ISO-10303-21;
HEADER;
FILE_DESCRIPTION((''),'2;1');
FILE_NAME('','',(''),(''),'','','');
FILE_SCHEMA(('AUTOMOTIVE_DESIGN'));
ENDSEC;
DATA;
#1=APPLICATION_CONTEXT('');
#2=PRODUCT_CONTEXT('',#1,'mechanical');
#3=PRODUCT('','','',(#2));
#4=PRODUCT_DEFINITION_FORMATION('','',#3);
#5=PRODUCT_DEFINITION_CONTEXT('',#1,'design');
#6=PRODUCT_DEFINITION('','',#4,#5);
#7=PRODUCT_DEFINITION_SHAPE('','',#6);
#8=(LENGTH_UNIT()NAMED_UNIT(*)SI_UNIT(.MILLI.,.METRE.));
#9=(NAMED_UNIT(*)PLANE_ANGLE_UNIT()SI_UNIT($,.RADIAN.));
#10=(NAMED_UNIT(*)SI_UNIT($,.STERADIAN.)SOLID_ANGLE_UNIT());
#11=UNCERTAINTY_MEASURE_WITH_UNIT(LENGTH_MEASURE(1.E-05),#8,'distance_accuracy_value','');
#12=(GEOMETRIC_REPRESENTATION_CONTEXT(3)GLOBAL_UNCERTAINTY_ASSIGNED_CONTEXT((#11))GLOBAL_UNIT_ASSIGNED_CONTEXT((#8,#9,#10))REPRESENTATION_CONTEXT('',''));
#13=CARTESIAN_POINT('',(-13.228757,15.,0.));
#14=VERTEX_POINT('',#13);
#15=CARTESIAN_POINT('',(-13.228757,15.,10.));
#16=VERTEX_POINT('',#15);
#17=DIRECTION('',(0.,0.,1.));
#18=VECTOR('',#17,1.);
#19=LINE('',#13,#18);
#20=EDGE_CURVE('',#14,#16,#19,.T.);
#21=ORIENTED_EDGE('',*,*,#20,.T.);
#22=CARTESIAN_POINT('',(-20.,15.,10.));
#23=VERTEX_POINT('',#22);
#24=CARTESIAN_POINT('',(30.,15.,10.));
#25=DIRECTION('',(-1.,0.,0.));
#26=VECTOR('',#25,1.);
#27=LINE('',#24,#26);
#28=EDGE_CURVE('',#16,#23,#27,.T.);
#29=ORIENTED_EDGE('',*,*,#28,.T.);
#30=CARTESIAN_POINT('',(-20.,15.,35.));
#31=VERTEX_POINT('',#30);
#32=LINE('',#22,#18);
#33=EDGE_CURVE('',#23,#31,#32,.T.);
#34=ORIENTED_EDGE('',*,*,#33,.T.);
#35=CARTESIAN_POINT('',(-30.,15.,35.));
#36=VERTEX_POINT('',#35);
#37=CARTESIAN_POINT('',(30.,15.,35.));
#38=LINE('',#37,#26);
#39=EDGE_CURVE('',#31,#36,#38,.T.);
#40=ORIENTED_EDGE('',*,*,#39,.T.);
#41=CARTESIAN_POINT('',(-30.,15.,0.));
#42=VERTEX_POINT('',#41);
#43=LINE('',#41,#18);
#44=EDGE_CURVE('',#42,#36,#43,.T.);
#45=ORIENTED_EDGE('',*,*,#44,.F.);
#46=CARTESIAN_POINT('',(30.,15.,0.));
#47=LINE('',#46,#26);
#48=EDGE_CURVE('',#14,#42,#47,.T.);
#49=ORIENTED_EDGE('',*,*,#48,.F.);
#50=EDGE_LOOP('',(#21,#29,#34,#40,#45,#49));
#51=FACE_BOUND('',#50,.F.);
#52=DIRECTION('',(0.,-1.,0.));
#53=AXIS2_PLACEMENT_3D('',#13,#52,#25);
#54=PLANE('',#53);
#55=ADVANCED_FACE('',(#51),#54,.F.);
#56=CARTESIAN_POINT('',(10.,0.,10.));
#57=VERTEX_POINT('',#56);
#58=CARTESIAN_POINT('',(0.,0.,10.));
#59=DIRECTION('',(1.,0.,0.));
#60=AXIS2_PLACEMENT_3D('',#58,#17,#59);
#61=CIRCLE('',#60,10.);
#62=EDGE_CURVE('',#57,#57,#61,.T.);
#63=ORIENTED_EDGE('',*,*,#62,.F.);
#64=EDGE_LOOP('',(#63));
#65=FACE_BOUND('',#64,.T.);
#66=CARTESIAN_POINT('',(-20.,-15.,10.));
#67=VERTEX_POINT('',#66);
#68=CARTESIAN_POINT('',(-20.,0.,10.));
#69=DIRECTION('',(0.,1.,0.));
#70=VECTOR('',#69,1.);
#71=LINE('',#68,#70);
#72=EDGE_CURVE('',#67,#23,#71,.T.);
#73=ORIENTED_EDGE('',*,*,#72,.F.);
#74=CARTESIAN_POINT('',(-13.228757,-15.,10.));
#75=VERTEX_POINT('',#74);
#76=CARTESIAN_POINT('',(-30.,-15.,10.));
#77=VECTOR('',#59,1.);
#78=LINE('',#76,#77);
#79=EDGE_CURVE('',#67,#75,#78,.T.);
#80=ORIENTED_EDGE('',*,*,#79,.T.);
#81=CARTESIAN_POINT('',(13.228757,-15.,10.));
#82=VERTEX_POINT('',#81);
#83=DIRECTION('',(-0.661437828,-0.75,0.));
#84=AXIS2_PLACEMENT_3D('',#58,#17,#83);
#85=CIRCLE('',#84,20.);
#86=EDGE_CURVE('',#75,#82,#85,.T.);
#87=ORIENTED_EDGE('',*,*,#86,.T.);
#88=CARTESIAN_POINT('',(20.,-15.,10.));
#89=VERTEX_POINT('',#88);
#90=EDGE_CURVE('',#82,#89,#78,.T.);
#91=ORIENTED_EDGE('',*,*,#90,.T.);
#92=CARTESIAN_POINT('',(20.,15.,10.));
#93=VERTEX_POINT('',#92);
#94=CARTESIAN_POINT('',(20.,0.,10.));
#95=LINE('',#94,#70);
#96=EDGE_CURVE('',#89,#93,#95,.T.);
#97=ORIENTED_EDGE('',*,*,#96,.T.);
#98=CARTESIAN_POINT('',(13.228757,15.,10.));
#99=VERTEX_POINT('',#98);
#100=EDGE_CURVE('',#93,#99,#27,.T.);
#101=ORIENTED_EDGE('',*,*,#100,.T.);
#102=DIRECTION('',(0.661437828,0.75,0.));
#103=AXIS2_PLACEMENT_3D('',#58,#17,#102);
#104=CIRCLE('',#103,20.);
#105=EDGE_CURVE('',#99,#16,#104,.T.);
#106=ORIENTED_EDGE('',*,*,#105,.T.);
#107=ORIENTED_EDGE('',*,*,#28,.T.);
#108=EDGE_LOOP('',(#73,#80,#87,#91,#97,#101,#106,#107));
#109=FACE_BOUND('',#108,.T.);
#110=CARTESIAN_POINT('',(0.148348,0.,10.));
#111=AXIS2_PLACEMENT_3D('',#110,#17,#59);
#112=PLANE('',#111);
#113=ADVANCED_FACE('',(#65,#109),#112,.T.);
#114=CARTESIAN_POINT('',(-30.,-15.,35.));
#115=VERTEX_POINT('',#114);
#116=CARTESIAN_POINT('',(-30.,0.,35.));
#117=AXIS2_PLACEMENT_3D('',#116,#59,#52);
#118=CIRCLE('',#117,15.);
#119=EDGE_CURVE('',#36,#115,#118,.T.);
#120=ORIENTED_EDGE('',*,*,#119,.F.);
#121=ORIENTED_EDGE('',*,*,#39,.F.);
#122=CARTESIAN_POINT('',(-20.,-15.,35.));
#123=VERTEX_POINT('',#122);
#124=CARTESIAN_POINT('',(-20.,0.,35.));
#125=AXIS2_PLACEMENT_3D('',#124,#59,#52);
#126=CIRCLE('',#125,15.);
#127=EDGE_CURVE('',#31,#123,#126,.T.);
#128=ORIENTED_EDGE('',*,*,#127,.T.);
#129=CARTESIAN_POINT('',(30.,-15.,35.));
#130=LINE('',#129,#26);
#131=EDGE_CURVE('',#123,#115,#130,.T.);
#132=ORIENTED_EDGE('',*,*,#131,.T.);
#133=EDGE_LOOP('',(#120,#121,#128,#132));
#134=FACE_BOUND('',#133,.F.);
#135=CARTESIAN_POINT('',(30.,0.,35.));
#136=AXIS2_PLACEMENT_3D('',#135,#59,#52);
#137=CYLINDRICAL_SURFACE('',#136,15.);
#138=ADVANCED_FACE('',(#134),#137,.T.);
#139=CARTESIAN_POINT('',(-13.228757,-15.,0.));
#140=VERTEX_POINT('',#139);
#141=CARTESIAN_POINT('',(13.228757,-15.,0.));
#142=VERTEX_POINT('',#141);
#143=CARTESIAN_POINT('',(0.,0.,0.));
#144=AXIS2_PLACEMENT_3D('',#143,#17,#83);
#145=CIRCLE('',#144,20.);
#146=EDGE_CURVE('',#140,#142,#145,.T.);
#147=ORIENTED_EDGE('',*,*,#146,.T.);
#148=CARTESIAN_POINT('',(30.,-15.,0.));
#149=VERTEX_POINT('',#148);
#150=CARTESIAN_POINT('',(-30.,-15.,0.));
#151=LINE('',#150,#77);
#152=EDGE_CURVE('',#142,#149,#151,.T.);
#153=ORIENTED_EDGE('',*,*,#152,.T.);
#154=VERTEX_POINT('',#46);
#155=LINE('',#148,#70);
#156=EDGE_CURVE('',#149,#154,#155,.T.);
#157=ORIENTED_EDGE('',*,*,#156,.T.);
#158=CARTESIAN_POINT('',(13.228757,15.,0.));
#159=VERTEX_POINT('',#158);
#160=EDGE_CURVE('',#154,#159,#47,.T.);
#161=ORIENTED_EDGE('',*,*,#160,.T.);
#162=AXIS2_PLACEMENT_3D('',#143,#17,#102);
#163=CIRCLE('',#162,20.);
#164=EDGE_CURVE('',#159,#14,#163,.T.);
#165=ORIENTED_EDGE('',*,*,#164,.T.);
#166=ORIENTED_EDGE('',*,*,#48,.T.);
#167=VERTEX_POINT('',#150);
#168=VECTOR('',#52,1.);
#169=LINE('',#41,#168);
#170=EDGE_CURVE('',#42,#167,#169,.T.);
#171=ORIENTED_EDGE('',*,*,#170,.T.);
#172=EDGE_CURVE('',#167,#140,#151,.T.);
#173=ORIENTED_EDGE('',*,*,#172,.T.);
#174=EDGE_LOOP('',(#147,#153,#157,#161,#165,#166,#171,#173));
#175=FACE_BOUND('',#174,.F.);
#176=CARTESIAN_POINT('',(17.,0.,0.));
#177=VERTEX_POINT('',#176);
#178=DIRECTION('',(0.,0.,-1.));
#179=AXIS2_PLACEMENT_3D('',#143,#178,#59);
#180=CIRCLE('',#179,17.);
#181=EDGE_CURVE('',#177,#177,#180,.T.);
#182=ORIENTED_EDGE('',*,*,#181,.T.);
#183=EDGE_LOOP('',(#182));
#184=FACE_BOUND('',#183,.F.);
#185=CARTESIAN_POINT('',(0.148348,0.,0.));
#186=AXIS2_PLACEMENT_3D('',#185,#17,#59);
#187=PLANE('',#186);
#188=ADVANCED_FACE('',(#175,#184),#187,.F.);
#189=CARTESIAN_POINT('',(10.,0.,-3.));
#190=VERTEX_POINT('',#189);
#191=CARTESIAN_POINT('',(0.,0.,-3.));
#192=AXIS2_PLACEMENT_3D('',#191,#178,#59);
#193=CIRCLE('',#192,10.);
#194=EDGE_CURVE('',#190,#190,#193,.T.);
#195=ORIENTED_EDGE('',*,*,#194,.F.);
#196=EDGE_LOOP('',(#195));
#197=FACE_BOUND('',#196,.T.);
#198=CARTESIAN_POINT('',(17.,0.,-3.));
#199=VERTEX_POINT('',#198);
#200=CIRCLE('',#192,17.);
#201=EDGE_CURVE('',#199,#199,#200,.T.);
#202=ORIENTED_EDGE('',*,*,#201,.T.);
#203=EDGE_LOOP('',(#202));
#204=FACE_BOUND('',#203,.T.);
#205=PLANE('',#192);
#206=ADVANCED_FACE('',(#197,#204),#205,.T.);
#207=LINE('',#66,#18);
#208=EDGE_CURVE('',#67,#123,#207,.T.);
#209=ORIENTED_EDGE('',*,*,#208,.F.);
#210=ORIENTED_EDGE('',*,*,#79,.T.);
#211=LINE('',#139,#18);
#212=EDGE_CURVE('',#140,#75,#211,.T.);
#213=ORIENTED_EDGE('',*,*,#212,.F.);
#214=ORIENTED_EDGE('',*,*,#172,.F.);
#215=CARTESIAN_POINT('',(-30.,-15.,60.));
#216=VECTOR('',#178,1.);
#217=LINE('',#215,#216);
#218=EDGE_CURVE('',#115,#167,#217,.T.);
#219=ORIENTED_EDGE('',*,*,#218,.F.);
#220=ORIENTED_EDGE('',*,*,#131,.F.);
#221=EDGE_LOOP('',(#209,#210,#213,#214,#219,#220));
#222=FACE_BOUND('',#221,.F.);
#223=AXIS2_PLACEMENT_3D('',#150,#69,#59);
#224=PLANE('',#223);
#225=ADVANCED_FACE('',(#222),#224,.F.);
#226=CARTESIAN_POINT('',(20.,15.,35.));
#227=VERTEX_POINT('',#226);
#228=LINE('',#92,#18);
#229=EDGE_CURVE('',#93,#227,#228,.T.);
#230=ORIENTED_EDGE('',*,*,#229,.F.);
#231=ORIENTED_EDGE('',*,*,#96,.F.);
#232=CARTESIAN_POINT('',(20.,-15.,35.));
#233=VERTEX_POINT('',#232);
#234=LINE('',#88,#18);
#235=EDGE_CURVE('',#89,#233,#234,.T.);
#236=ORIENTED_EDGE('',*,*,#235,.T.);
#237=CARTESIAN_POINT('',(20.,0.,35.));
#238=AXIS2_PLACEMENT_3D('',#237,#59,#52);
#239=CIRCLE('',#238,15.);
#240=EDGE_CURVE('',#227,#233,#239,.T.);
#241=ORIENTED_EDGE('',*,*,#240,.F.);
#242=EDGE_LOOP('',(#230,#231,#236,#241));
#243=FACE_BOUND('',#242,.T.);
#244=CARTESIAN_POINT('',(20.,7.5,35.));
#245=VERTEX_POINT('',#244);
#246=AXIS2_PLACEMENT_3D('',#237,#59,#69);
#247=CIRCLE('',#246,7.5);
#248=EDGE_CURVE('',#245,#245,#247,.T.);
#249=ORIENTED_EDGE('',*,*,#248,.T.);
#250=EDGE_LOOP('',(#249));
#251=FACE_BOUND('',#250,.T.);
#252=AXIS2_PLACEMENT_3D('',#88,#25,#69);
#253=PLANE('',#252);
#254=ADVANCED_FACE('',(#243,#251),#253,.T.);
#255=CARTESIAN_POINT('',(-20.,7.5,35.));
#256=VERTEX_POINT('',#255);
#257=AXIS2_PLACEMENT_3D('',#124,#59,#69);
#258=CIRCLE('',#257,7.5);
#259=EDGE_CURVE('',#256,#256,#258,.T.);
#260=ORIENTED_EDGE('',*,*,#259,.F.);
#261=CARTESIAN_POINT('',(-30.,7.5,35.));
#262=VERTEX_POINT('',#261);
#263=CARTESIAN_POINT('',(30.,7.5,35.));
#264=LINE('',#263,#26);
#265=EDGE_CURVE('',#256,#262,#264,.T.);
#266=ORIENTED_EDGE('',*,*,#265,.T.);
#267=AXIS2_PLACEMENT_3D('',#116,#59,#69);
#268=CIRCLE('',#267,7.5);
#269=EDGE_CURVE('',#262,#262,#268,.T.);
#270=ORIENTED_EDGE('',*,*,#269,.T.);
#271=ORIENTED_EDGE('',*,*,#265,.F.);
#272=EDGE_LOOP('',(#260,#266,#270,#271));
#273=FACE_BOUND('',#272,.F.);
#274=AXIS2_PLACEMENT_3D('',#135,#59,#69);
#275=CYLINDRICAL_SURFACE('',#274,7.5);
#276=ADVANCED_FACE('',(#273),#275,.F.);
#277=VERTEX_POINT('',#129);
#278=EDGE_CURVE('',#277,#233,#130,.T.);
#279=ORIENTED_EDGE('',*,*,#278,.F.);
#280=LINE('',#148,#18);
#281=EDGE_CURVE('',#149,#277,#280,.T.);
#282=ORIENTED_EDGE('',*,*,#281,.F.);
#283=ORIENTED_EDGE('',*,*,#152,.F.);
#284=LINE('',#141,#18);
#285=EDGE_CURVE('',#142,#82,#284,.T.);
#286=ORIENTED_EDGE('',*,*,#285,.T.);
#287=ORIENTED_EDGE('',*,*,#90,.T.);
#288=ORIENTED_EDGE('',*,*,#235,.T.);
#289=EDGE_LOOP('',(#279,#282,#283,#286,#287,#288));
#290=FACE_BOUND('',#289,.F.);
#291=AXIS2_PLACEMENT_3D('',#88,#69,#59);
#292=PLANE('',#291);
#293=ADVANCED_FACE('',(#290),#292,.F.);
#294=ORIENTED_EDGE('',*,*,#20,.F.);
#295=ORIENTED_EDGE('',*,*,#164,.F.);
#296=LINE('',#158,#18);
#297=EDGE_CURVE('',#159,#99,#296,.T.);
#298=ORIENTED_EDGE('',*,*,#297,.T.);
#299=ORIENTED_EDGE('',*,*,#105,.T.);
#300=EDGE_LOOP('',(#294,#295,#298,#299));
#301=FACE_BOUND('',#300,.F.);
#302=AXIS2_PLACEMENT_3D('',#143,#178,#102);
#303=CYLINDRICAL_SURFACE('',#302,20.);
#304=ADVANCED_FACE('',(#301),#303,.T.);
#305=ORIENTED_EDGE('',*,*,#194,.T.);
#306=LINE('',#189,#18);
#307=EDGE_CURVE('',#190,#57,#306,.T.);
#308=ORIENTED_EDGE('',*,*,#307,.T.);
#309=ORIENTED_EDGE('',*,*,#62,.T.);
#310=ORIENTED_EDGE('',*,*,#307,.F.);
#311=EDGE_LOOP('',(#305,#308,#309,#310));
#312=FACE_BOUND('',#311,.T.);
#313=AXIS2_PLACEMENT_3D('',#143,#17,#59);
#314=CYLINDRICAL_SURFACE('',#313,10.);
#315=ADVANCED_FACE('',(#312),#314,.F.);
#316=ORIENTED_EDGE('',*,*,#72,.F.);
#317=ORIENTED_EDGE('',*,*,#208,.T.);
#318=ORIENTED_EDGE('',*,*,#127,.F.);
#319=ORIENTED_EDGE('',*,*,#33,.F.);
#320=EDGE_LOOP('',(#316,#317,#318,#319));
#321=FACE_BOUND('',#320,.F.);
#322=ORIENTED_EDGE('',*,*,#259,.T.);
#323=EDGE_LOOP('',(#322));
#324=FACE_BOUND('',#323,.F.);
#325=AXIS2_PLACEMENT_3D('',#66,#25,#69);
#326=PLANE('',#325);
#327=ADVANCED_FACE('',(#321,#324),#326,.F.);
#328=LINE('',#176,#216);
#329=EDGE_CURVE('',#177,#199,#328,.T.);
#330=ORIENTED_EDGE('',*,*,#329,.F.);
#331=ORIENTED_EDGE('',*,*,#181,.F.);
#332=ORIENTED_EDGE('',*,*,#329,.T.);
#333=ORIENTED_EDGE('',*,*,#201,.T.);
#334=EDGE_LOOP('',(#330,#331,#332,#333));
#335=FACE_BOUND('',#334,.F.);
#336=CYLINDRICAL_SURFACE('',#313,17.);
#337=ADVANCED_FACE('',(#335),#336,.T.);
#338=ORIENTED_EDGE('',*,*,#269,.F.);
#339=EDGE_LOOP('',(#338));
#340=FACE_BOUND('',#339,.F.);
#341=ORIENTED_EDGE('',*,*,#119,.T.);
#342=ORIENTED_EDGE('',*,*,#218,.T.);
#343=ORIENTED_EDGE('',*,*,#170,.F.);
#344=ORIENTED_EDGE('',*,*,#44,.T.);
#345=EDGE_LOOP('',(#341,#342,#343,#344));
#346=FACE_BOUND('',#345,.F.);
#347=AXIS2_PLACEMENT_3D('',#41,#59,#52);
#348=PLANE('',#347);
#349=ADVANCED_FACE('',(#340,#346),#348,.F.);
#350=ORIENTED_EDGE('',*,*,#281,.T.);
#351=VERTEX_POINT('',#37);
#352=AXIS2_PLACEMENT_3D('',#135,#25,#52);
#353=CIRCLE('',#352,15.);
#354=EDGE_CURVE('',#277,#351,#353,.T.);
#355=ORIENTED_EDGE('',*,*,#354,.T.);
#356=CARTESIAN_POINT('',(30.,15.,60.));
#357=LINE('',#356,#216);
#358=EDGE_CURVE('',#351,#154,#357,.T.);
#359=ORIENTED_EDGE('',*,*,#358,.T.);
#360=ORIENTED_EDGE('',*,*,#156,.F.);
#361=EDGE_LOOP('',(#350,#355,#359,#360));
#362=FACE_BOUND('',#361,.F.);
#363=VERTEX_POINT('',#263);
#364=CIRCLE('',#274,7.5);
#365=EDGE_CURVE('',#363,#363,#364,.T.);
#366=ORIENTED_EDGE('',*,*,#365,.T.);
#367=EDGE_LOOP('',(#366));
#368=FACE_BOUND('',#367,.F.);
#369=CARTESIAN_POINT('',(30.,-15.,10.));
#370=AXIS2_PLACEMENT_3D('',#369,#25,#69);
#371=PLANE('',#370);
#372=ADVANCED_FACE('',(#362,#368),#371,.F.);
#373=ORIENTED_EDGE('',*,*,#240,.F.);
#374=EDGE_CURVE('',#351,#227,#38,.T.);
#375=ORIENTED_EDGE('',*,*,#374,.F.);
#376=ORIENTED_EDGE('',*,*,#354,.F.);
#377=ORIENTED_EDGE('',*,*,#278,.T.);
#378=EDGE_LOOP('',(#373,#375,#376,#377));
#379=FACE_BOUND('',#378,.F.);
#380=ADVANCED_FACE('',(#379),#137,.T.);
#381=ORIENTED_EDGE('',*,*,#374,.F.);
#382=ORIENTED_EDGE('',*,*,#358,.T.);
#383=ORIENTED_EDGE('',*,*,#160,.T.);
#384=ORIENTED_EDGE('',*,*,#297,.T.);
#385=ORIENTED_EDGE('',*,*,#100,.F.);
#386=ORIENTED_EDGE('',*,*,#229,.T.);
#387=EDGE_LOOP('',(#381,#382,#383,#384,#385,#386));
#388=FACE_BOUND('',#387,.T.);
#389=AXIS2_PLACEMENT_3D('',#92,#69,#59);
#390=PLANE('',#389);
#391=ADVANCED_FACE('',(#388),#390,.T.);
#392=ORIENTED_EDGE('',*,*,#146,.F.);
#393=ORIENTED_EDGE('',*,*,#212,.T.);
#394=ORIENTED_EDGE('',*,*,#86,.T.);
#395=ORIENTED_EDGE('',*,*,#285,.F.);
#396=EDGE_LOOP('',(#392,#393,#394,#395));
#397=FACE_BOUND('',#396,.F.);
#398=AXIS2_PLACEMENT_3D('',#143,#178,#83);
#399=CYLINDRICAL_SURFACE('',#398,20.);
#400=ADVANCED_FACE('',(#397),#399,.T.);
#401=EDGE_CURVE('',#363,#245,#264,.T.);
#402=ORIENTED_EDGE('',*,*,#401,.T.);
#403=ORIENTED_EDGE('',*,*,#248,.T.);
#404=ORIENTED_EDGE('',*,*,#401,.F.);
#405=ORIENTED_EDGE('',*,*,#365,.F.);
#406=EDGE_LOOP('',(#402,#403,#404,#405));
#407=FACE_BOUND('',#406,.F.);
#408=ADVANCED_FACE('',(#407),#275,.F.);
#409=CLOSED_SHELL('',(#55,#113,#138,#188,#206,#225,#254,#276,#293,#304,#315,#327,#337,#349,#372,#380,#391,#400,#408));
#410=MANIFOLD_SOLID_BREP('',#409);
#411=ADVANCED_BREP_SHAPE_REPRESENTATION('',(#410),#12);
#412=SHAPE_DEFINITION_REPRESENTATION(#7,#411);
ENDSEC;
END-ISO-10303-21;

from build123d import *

# Parameters (mm, degrees)
F0_R     = 10
F1_DEPTH = 10
F2_W     = 10
F2_H     = 30
F3_DEPTH = 50
F4_R     = 7.5
F5_DEPTH = 60.001
F6_R     = 17
F6_R_2   = 10
F7_DEPTH = 3


with BuildPart() as f1:
    # F0 (on Top) → F1 (new body)
    with BuildSketch(Plane.XY):
        with BuildLine():
            Line((13.2287565553, 15), (0, 15))
            Line((0, 15), (-13.2287565553, 15))
            ThreePointArc((-13.2287565553, 15), (-20, 0), (-13.2287565553, -15))
            Line((-13.2287565553, -15), (0, -15))
            Line((0, -15), (13.2287565553, -15))
            ThreePointArc((13.2287565553, -15), (18.2287565553, -8.2287565553), (20, 0))
            ThreePointArc((20, 0), (18.2287565553, 8.2287565553), (13.2287565553, 15))
        make_face()
        Circle(F0_R, mode=Mode.SUBTRACT)
        with BuildLine():
            Line((30, 15), (13.2287565553, 15))
            ThreePointArc((13.2287565553, 15), (18.2287565553, 8.2287565553), (20, 0))
            ThreePointArc((20, 0), (18.2287565553, -8.2287565553), (13.2287565553, -15))
            Line((13.2287565553, -15), (30, -15))
            Line((30, -15), (30, 15))
        make_face()
        with BuildLine():
            ThreePointArc((-13.2287565553, -15), (-20, 0), (-13.2287565553, 15))
            Line((-13.2287565553, 15), (-30, 15))
            Line((-30, 15), (-30, -15))
            Line((-30, -15), (-13.2287565553, -15))
        make_face()
        with BuildLine():
            Line((-13.2287565553, 15), (0, 15))
            Line((0, 15), (13.2287565553, 15))
            ThreePointArc((13.2287565553, 15), (0, 20), (-13.2287565553, 15))
        make_face()
        with BuildLine():
            Line((0, -15), (-13.2287565553, -15))
            ThreePointArc((-13.2287565553, -15), (0, -20), (13.2287565553, -15))
            Line((13.2287565553, -15), (0, -15))
        make_face()
    extrude(amount=F1_DEPTH)

    # F2 (on face) → F3 (join)
    with BuildSketch(Plane.XY.offset(10)):
        with Locations((25, 0)):
            Rectangle(F2_W, F2_H)
        with Locations((-25, 0)):
            Rectangle(F2_W, F2_H)
    extrude(amount=F3_DEPTH)

    # F4 (on face) → F5 (cut, through all)
    with BuildSketch(Plane.YZ.offset(30)):
        with BuildLine():
            Line((-15, 60), (-15, 35))
            ThreePointArc((-15, 35), (0, 50), (15, 35))
            Line((15, 35), (15, 60))
            Line((15, 60), (-15, 60))
        make_face()
        with Locations((0, 35)):
            Circle(F4_R)
    extrude(amount=-F5_DEPTH, mode=Mode.SUBTRACT)

    # F6 (on face) → F7 (join)
    with BuildSketch(Plane(origin=(0, 0, 0), x_dir=(1, 0, 0), z_dir=(0, 0, -1))):
        Circle(F6_R)
        Circle(F6_R_2, mode=Mode.SUBTRACT)
    extrude(amount=F7_DEPTH)


solid = f1.part
